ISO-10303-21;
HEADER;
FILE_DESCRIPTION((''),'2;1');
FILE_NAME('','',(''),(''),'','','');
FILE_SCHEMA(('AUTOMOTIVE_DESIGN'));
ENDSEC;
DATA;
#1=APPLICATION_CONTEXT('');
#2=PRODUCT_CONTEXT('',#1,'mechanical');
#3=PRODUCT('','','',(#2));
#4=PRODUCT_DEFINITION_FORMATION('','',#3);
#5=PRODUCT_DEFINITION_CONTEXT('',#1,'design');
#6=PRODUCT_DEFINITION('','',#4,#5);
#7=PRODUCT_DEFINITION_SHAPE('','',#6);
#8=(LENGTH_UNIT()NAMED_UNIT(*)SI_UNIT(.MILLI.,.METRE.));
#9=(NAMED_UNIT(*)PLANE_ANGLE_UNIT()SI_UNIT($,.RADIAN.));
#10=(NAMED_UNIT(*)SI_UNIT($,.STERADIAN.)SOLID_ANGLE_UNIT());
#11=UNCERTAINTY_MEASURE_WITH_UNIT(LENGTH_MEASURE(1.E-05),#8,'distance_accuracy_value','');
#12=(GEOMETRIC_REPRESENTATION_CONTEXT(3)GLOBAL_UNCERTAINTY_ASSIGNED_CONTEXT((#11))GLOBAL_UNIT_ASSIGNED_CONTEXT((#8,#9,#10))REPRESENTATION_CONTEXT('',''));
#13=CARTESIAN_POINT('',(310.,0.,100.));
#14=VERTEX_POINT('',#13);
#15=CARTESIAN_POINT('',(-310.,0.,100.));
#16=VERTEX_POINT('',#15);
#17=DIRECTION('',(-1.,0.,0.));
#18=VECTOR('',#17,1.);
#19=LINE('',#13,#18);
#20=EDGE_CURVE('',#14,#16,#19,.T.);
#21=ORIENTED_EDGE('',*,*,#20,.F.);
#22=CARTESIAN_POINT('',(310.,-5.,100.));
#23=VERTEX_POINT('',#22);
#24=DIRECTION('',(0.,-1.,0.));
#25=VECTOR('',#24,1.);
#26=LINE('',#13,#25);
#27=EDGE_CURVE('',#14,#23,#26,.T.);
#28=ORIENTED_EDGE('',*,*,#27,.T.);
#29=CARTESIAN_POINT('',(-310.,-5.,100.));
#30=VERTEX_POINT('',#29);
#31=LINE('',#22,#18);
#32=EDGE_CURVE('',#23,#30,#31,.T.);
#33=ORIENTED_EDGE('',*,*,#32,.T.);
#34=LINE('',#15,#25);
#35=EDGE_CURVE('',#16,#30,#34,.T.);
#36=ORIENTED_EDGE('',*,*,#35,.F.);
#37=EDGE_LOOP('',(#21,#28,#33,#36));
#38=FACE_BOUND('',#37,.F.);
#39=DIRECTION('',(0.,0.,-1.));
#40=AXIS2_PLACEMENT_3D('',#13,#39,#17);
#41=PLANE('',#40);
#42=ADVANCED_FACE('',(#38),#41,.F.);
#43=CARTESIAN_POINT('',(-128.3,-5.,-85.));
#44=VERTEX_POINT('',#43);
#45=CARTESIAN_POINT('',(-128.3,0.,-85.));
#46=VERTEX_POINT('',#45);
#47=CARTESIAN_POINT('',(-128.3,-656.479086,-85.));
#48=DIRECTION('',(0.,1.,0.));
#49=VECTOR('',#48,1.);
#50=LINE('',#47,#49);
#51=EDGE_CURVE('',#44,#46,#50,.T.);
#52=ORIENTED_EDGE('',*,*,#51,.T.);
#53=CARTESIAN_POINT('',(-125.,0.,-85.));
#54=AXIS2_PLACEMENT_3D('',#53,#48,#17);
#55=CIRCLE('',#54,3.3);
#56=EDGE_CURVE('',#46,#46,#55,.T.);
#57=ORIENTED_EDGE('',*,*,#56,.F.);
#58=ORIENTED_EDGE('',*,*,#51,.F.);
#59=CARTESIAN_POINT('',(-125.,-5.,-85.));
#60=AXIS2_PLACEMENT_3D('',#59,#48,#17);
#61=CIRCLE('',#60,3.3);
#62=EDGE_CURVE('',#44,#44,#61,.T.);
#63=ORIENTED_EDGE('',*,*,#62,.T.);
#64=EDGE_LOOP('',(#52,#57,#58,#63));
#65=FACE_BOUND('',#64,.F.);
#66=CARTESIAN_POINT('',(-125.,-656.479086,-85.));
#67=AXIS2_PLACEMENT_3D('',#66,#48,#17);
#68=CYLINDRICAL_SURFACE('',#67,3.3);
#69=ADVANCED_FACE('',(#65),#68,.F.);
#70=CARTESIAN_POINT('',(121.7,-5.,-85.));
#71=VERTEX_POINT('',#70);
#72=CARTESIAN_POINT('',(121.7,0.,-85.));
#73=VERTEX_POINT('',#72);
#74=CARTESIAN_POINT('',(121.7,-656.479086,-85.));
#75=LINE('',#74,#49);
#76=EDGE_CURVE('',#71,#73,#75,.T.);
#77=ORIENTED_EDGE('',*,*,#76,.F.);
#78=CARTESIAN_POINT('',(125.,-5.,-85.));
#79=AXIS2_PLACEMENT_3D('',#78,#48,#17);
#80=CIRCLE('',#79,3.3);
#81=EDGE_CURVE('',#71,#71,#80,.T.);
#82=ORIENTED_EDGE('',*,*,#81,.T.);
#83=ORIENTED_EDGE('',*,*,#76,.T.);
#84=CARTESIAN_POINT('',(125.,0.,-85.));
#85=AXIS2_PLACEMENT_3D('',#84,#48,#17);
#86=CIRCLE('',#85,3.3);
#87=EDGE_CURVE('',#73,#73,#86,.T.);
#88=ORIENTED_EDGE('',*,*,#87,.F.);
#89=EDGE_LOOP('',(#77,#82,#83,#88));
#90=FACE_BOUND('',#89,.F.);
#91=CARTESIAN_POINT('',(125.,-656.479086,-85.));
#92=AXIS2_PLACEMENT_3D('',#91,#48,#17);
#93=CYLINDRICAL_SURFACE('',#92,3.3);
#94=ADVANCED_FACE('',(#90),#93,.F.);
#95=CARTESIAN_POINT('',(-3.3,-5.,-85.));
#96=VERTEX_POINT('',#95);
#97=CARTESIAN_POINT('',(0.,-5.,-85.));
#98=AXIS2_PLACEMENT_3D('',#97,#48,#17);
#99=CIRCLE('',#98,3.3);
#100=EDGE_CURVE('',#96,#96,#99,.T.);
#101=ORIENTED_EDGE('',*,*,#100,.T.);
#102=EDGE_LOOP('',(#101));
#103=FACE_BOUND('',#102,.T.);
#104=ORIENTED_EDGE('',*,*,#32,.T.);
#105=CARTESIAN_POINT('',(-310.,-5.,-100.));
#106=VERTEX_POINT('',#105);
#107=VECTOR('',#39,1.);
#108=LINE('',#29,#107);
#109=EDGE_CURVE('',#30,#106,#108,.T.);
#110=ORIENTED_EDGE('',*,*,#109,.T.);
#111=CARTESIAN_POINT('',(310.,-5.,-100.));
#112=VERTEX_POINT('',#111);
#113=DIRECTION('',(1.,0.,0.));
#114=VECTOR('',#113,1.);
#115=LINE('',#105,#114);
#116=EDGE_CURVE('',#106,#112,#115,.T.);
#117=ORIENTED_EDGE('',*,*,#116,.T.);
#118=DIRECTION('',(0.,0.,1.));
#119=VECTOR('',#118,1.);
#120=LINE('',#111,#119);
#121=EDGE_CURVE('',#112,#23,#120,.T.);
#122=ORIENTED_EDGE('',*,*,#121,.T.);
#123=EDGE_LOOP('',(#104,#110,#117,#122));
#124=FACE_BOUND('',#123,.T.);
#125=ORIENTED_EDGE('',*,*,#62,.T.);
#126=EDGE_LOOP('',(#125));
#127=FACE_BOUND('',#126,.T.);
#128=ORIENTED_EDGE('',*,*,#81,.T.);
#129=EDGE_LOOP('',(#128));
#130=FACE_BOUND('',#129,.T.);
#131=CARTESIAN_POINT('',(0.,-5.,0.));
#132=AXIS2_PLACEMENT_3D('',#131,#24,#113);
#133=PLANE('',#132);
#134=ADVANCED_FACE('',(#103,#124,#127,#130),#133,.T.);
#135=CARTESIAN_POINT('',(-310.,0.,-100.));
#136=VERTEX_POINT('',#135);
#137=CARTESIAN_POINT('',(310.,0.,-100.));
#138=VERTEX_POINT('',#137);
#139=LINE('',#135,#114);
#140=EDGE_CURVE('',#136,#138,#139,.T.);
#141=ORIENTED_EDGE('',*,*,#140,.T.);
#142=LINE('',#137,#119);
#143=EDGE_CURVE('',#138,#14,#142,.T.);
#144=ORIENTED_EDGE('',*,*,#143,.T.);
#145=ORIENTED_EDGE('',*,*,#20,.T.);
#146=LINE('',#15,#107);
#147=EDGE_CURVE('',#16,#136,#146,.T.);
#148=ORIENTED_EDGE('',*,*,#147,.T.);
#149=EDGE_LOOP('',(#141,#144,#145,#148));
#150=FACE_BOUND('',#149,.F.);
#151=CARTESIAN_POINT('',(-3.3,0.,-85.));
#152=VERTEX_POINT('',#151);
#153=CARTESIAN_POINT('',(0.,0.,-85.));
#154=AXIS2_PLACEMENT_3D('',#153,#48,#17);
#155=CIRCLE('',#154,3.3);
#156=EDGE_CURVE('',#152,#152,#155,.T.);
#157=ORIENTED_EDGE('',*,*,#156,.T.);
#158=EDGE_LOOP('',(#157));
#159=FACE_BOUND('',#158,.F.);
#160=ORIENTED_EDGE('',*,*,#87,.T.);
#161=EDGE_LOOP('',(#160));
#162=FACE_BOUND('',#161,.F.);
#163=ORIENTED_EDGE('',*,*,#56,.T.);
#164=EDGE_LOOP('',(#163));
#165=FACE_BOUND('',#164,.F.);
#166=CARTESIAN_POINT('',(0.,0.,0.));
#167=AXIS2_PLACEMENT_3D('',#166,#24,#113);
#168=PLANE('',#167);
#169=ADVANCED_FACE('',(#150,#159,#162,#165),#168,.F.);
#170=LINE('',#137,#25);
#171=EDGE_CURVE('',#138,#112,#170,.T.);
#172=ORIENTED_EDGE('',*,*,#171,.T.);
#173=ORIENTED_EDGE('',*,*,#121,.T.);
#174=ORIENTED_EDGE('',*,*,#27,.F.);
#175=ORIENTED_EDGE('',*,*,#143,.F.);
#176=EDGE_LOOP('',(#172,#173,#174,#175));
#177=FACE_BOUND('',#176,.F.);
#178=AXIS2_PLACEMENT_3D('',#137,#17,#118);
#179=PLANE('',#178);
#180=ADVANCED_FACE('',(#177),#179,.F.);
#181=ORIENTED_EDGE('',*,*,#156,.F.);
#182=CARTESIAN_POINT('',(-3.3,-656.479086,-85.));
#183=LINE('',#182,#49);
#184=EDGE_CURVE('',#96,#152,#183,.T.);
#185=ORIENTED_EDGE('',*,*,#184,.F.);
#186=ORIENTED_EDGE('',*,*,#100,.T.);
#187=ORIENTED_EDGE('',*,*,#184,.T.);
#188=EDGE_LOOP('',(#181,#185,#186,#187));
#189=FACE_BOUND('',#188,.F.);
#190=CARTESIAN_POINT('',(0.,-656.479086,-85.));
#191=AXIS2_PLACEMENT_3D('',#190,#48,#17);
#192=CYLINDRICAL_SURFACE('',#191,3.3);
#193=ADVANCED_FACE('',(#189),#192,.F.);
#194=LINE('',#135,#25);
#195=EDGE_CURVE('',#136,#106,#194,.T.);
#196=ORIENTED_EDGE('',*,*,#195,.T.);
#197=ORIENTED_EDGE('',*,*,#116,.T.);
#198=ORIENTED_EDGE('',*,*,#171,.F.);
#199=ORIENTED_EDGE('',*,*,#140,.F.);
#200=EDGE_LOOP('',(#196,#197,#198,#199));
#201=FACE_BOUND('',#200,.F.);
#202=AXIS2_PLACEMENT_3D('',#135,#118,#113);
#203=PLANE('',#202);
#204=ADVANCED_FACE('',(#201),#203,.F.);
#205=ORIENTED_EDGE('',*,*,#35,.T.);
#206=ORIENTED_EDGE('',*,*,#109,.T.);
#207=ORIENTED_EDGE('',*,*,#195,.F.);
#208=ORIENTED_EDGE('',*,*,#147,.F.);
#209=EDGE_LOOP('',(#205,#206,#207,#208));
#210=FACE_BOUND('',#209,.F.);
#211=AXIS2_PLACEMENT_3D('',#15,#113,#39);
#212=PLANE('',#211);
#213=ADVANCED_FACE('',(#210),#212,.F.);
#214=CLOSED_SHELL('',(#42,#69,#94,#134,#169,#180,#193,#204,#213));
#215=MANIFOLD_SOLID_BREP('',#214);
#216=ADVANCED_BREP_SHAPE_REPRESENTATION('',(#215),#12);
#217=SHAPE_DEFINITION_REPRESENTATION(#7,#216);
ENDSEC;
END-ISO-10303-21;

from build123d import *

# Parameters (mm, degrees)
F1_DEPTH = 5
F3_D     = 6.6


# Not quite as in the source:
# - a feature names something its author has since deleted; it is built from what else it names


with BuildPart() as f1:
    # F0 (on Front) → F1 (new body)
    with BuildSketch(Plane.XZ):
        Polygon((-250, 100), (-310, 100), (-310, -100), (310, -100), (310, 100), align=None)
    extrude(amount=F1_DEPTH)

    # F3 (through all)
    with Locations(Plane.XZ.offset(5)):
        with Locations((-125, -85), (125, -85), (0, -85)):
            Hole(F3_D / 2)


solid = f1.part
